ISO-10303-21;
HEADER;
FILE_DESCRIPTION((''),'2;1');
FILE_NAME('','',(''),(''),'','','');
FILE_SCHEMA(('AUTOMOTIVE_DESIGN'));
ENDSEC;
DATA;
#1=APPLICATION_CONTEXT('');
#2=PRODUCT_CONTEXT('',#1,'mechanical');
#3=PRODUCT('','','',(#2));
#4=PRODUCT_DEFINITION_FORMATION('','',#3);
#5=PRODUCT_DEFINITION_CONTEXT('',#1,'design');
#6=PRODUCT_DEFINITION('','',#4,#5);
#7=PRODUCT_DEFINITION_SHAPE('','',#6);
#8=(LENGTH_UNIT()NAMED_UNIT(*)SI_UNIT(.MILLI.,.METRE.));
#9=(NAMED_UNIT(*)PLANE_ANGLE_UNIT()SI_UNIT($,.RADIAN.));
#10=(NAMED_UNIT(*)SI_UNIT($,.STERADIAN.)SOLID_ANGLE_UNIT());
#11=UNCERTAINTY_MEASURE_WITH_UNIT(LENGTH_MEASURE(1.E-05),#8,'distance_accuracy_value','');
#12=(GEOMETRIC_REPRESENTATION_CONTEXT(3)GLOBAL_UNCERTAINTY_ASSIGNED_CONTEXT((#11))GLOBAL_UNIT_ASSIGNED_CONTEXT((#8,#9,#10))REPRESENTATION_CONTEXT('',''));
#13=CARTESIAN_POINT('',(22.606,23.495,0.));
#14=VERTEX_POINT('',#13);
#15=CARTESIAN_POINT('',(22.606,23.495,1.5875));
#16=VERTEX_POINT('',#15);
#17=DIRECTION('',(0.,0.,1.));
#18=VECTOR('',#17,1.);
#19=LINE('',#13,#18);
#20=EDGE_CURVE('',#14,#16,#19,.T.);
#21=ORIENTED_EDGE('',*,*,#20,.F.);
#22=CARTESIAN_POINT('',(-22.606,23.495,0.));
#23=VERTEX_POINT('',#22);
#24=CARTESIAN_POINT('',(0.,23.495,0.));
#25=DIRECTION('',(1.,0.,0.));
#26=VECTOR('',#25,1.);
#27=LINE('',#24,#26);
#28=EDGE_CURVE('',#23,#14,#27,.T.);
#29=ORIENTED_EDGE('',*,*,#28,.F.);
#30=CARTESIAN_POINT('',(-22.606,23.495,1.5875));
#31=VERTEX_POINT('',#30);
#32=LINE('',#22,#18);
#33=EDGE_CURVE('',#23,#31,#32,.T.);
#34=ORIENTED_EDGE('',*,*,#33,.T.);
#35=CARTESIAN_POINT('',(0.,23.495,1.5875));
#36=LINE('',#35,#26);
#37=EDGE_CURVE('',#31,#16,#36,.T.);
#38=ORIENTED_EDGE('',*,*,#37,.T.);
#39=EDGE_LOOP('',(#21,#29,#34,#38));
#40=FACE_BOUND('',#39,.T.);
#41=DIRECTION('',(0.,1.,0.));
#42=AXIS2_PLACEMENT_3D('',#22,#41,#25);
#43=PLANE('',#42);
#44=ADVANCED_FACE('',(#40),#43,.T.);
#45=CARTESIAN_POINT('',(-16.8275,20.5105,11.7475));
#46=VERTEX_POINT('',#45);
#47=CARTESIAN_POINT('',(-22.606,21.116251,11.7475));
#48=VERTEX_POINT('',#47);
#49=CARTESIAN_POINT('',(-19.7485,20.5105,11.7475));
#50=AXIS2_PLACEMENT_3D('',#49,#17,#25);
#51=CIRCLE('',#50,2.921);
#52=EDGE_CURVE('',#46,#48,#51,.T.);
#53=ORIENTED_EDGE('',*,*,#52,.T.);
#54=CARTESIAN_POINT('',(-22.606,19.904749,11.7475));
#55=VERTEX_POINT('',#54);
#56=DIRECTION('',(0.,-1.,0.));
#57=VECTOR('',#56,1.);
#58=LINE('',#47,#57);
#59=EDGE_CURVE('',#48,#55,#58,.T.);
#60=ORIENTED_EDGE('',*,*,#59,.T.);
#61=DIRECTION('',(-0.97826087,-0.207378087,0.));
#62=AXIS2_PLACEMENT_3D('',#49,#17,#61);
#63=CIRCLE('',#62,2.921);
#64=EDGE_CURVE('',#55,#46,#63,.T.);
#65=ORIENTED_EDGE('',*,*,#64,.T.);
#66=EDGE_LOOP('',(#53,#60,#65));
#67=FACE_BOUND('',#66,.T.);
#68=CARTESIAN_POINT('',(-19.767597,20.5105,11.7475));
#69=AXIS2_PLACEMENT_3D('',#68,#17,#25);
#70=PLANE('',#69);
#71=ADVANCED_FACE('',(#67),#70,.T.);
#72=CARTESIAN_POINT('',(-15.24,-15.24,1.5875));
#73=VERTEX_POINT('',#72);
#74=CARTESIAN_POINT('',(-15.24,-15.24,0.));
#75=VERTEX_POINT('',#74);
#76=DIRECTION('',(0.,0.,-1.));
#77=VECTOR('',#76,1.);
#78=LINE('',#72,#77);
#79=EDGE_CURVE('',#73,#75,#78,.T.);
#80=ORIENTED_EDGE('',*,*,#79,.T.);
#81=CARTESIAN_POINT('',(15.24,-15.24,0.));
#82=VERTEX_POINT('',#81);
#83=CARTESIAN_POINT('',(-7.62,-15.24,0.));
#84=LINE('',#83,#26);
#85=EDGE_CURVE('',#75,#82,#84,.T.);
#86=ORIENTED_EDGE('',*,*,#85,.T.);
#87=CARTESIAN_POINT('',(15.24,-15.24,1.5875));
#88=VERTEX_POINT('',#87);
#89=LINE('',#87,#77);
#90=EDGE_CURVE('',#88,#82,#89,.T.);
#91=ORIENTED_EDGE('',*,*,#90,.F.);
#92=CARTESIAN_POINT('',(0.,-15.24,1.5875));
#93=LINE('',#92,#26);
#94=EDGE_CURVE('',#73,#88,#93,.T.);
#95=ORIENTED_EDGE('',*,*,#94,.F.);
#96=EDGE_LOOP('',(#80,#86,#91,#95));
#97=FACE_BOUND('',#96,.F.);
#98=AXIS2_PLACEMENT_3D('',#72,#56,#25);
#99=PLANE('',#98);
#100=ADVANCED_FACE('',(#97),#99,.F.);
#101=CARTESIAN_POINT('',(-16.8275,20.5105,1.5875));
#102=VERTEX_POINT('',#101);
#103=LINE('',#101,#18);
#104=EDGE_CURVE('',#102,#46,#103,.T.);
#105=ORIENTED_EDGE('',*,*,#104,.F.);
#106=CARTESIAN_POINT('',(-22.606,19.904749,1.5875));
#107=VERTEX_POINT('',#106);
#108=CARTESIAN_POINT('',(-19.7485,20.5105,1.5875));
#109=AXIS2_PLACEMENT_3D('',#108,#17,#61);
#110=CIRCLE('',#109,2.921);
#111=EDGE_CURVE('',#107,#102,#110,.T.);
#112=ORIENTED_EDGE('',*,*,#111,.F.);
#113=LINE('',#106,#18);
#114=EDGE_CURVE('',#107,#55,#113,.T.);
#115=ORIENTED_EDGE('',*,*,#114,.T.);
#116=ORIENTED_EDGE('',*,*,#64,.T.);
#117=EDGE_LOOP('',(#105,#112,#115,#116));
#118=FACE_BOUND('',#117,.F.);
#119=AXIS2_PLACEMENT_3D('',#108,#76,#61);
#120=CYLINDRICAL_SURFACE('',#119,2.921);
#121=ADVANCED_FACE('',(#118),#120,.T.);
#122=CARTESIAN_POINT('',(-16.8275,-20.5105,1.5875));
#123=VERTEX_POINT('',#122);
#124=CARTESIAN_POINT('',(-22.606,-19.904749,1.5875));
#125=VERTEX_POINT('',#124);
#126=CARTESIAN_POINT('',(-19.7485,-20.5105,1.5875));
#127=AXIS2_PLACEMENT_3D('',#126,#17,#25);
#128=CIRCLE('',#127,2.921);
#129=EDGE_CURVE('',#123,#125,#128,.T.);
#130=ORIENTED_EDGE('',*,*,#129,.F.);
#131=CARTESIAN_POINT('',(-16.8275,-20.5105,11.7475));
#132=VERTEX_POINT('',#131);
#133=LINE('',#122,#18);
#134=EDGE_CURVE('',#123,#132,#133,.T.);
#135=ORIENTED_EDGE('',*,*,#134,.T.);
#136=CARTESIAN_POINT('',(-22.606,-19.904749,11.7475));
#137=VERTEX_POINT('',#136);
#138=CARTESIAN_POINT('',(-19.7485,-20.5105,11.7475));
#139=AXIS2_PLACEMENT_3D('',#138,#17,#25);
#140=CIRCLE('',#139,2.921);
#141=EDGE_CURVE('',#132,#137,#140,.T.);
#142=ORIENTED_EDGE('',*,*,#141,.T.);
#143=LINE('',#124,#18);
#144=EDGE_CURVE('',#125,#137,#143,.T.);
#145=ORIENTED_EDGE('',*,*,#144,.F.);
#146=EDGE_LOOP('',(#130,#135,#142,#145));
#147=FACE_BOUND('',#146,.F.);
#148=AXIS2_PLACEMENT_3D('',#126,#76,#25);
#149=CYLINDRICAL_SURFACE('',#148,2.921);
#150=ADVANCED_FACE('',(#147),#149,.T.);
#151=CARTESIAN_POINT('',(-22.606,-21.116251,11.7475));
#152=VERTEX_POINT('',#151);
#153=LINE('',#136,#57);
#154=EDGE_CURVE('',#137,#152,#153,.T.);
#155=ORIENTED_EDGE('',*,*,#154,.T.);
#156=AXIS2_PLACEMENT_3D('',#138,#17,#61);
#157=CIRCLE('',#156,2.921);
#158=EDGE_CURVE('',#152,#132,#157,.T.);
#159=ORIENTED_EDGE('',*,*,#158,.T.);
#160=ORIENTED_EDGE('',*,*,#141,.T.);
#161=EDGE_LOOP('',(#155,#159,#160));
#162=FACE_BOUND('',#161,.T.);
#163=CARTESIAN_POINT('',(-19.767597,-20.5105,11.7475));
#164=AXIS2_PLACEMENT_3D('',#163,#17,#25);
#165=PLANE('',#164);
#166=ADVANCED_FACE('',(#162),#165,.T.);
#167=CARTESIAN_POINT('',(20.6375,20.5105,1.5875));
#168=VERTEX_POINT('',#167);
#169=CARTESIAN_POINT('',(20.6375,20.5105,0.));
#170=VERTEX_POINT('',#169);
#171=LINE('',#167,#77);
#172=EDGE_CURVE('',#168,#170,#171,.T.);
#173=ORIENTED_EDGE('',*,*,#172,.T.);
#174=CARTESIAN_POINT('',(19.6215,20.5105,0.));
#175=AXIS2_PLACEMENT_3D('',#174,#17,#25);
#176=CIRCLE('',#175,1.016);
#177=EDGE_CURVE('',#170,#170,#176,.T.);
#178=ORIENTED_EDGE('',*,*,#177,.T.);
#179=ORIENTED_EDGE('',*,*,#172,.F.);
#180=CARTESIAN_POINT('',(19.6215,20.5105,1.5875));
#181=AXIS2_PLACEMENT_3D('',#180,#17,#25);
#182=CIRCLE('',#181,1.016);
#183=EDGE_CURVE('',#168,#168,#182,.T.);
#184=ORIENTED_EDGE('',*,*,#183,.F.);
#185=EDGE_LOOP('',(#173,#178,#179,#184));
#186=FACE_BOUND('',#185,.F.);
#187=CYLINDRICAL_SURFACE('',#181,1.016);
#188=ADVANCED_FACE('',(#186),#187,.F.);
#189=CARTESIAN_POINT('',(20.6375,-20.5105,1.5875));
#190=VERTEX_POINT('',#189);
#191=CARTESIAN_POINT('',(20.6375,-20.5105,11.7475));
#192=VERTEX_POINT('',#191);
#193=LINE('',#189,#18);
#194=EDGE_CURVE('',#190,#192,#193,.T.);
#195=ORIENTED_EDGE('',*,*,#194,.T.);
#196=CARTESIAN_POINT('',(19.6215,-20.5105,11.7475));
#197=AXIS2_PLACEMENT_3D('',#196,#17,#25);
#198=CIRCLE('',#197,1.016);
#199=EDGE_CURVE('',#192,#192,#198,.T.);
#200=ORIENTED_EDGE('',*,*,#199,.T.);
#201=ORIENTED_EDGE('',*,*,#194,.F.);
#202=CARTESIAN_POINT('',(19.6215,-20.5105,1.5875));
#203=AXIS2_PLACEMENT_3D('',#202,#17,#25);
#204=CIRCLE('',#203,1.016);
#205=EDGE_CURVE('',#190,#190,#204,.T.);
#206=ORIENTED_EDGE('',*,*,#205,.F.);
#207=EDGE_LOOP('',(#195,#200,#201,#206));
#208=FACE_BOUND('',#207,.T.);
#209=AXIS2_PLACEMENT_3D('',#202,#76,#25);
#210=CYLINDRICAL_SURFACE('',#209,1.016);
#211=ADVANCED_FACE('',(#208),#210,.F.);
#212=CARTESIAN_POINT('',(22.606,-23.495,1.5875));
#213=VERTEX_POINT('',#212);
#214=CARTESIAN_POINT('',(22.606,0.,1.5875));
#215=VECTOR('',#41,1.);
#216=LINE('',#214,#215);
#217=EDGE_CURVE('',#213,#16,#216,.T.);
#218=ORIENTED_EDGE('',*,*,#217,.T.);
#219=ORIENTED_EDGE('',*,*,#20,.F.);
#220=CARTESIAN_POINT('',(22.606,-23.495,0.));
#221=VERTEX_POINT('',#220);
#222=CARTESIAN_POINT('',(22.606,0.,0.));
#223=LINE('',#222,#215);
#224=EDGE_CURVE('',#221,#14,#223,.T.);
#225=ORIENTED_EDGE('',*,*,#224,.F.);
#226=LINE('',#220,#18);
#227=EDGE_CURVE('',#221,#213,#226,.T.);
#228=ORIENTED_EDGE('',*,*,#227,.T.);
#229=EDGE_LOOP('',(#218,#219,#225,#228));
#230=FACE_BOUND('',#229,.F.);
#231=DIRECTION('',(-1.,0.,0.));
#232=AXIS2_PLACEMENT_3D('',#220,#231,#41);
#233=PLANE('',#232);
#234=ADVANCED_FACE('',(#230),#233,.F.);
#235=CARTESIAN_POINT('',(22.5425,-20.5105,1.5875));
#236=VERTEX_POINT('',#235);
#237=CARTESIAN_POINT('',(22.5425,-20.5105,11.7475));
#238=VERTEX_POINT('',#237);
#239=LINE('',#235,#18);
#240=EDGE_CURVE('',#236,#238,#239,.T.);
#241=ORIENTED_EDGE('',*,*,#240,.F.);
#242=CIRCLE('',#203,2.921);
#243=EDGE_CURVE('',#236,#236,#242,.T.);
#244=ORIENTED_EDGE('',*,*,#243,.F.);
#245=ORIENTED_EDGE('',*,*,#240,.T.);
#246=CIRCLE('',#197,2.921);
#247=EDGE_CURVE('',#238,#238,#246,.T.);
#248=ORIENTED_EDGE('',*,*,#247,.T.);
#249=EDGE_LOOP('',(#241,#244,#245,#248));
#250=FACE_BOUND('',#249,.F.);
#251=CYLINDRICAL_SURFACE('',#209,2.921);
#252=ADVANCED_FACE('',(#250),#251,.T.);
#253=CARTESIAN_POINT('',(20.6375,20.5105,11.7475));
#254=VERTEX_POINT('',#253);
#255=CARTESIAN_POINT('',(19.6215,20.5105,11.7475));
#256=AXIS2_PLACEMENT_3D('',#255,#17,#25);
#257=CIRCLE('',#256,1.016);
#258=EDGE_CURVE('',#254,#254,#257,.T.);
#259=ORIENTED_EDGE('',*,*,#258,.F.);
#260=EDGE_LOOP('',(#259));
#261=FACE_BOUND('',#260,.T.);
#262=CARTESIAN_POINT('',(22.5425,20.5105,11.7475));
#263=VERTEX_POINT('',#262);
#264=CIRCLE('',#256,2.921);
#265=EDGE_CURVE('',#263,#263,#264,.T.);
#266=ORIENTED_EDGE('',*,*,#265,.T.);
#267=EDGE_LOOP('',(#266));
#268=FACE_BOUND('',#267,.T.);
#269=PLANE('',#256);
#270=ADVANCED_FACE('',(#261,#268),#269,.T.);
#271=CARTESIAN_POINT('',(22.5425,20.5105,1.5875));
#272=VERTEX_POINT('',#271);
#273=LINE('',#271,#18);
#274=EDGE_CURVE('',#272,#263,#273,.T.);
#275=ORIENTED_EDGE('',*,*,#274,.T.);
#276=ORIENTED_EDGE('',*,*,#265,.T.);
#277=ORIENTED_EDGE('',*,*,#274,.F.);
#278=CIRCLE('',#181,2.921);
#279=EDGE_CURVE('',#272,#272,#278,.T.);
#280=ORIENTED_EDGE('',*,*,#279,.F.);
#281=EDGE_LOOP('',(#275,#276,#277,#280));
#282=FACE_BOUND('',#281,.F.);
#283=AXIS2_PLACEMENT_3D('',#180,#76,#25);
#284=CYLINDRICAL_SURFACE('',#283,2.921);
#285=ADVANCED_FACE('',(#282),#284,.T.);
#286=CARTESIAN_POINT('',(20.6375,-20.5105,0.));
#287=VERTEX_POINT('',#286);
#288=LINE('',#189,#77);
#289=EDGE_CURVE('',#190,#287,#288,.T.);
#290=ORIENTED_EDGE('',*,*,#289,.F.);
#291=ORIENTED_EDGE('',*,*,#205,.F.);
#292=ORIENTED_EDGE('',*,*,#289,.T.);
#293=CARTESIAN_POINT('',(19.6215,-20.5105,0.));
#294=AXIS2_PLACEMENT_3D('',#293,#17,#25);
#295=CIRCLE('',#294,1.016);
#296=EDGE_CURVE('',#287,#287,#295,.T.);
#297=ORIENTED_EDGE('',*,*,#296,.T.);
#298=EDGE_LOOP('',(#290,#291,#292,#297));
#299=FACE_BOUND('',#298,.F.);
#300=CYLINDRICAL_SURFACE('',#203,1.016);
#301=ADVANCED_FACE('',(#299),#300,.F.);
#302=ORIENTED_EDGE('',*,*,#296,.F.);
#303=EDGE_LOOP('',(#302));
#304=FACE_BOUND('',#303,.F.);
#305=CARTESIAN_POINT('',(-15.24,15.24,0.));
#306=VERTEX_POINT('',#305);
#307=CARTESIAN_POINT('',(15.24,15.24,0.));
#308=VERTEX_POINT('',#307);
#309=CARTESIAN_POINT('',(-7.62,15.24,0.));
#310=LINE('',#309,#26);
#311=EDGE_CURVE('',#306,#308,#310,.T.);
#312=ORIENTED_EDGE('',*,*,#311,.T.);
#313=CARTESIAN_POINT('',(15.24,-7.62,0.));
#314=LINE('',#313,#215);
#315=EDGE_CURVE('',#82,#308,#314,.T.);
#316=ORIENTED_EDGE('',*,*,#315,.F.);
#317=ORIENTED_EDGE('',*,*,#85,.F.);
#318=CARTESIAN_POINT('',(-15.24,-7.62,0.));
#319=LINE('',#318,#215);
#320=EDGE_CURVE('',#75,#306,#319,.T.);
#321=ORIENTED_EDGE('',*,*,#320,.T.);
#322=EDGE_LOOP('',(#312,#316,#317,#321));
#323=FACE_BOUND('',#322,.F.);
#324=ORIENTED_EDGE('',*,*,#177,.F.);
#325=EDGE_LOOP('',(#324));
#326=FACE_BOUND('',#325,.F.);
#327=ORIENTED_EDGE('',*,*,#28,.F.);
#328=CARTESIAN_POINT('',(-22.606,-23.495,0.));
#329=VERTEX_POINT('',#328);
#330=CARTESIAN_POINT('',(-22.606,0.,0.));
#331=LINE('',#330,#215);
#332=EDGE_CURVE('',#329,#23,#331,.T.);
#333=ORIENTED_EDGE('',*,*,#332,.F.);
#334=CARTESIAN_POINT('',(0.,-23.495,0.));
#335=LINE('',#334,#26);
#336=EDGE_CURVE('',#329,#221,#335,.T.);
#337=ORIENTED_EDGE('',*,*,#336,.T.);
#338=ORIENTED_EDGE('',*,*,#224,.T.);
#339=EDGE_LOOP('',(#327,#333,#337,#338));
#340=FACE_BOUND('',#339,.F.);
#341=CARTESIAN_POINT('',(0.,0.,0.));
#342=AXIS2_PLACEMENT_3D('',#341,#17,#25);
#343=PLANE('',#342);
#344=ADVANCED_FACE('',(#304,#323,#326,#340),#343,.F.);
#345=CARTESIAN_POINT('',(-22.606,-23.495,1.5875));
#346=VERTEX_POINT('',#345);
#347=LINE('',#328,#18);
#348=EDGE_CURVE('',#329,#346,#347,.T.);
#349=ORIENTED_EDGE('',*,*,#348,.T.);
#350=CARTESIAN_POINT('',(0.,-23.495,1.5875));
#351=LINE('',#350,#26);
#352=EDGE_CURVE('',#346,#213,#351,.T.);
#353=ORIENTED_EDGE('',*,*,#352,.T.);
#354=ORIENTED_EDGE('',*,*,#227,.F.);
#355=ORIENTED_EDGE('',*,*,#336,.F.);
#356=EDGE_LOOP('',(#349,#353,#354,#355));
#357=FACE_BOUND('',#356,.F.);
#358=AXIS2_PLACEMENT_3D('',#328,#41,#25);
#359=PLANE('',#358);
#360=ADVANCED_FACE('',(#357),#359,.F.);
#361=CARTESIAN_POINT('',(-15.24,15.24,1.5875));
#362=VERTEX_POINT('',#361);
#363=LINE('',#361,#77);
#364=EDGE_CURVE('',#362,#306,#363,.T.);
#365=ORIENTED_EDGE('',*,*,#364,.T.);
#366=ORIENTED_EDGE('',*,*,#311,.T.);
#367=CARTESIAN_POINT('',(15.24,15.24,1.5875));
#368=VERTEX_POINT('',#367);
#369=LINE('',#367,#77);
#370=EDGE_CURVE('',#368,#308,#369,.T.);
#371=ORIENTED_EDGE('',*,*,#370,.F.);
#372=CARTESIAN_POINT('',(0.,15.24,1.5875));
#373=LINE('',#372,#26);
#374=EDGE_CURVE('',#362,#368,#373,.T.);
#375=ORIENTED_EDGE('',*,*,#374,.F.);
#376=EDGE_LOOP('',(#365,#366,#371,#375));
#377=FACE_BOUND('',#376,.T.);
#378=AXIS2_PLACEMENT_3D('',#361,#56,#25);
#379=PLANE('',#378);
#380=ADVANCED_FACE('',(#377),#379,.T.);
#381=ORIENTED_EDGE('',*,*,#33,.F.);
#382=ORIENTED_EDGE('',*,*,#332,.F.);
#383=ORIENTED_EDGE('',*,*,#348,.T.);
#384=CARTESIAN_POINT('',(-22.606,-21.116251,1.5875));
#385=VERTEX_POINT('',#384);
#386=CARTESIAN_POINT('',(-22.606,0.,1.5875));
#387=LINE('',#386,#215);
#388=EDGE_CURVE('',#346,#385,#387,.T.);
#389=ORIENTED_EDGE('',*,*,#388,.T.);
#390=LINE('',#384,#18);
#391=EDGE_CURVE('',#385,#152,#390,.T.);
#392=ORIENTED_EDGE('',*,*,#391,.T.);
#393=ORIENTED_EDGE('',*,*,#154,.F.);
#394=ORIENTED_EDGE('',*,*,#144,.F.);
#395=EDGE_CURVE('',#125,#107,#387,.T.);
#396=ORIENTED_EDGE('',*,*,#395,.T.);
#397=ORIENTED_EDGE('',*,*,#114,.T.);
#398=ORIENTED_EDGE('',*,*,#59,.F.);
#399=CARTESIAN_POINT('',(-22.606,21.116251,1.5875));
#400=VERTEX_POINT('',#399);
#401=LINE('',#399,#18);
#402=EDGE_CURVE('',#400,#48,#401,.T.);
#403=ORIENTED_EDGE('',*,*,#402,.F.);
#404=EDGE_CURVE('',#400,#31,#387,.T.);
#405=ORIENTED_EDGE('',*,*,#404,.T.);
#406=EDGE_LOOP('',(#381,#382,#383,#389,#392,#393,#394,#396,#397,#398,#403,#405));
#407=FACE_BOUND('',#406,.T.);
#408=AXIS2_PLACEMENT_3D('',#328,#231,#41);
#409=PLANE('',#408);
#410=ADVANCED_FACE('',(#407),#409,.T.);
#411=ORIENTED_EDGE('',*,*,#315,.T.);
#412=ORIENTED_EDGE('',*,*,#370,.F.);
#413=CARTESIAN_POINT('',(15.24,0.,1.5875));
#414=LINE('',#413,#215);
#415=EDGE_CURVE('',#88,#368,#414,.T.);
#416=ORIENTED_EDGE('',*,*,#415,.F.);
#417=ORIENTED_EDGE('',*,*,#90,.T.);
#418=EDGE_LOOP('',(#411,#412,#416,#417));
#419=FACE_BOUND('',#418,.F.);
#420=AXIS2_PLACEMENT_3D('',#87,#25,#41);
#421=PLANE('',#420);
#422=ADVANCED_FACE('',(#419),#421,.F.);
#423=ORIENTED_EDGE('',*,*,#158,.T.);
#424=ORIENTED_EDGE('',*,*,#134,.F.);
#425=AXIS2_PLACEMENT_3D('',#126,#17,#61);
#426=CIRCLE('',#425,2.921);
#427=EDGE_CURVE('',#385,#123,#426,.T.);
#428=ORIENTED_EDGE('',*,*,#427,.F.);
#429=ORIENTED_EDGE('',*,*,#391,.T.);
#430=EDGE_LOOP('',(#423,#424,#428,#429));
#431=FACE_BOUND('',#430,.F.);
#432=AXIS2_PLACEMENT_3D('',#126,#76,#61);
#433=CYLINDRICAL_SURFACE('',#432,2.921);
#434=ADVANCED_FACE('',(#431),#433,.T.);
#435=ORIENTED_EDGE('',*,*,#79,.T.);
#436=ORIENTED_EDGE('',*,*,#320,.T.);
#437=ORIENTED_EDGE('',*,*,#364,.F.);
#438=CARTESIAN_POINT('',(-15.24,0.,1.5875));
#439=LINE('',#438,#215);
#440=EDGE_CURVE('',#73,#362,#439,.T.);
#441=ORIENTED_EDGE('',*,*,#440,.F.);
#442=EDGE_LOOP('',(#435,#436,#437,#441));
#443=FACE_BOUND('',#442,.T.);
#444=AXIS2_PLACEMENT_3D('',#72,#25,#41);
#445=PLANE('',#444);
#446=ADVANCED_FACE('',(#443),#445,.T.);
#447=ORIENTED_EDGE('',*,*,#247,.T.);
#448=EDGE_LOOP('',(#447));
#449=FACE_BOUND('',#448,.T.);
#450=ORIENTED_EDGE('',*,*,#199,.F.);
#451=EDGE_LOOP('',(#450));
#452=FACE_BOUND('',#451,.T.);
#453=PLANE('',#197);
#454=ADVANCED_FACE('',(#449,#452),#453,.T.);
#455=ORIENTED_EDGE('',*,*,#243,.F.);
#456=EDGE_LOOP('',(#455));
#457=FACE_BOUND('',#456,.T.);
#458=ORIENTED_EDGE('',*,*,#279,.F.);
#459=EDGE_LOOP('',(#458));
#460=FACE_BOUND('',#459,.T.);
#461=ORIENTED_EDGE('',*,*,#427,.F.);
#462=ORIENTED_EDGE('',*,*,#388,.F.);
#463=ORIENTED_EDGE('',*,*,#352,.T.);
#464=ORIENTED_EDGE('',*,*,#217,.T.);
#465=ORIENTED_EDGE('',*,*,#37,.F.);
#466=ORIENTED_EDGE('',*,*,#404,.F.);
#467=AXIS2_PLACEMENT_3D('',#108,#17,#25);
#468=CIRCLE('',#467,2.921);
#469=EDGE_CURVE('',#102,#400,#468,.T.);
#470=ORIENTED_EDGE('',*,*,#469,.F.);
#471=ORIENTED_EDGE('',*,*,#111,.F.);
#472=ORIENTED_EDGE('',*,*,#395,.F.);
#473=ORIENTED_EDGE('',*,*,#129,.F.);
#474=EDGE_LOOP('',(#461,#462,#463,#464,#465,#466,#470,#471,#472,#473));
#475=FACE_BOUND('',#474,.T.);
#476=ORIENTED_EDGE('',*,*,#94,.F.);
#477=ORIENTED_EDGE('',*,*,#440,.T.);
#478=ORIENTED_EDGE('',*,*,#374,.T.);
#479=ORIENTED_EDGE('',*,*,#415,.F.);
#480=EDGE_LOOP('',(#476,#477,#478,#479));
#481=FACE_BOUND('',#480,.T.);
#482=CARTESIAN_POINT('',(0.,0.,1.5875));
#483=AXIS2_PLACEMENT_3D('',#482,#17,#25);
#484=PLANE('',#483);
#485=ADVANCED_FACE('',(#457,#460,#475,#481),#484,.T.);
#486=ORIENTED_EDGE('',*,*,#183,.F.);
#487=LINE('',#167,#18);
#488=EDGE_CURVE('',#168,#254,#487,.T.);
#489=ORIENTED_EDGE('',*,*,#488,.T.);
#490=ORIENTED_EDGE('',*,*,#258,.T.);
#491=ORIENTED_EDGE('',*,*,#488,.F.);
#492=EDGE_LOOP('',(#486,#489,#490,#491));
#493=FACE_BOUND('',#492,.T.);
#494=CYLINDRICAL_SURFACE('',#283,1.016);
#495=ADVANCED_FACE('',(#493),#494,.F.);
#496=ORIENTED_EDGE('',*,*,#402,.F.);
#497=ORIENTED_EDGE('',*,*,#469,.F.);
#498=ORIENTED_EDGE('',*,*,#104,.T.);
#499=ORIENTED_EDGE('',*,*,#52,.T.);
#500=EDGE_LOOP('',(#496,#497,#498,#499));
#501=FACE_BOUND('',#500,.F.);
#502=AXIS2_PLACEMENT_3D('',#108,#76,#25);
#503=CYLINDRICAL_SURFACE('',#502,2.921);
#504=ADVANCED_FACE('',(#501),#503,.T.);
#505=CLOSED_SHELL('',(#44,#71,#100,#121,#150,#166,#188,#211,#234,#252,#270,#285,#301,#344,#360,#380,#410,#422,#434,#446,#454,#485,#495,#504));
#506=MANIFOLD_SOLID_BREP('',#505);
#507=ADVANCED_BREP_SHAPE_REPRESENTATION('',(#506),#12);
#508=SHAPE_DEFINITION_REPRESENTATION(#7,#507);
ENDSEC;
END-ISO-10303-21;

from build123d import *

# Parameters (mm, degrees)
F0_W     = 45.212
F0_H     = 46.99
F1_DEPTH = 1.5875
F2_W     = 30.48
F2_H     = 30.48
F3_DEPTH = 6.35
F4_R     = 2.921
F4_R_2   = 1.016
F5_DEPTH = 10.16
F6_DEPTH = 6.35


with BuildPart() as f1:
    # F0 (on Top) → F1 (new body)
    with BuildSketch(Plane.XY):
        Rectangle(F0_W, F0_H)
    extrude(amount=F1_DEPTH)

    # F2 (on face) → F3 (cut)
    with BuildSketch(Plane.XY.offset(1.5875)):
        Rectangle(F2_W, F2_H)
    extrude(amount=-F3_DEPTH, mode=Mode.SUBTRACT)

    # F4 (on face) → F5 (join)
    with BuildSketch(Plane.XY.offset(1.5875)):
        with Locations((19.6215, -20.5105)):
            Circle(F4_R)
        with Locations((19.6215, -20.5105)):
            Circle(F4_R_2, mode=Mode.SUBTRACT)
        with BuildLine():
            ThreePointArc((-22.606, 19.9047486071), (-19.4439646983, 17.6054183746), (-16.8275, 20.5105))
            ThreePointArc((-16.8275, 20.5105), (-19.4439646983, 23.4155816254), (-22.606, 21.1162513929))
            Line((-22.606, 21.1162513929), (-22.606, 19.9047486071))
        make_face()
        with BuildLine():
            ThreePointArc((-16.8275, -20.5105), (-19.4439646983, -17.6054183746), (-22.606, -19.9047486071))
            Line((-22.606, -19.9047486071), (-22.606, -21.1162513929))
            ThreePointArc((-22.606, -21.1162513929), (-19.4439646983, -23.4155816254), (-16.8275, -20.5105))
        make_face()
        with Locations((19.6215, 20.5105)):
            Circle(F4_R)
        with Locations((19.6215, 20.5105)):
            Circle(F4_R_2, mode=Mode.SUBTRACT)
    extrude(amount=F5_DEPTH)

    # F4 (on face) → F6 (cut)
    with BuildSketch(Plane.XY.offset(1.5875)):
        with Locations((19.6215, -20.5105)):
            Circle(F4_R_2)
        with Locations((19.6215, 20.5105)):
            Circle(F4_R_2)
    extrude(amount=-F6_DEPTH, mode=Mode.SUBTRACT)


solid = f1.part
